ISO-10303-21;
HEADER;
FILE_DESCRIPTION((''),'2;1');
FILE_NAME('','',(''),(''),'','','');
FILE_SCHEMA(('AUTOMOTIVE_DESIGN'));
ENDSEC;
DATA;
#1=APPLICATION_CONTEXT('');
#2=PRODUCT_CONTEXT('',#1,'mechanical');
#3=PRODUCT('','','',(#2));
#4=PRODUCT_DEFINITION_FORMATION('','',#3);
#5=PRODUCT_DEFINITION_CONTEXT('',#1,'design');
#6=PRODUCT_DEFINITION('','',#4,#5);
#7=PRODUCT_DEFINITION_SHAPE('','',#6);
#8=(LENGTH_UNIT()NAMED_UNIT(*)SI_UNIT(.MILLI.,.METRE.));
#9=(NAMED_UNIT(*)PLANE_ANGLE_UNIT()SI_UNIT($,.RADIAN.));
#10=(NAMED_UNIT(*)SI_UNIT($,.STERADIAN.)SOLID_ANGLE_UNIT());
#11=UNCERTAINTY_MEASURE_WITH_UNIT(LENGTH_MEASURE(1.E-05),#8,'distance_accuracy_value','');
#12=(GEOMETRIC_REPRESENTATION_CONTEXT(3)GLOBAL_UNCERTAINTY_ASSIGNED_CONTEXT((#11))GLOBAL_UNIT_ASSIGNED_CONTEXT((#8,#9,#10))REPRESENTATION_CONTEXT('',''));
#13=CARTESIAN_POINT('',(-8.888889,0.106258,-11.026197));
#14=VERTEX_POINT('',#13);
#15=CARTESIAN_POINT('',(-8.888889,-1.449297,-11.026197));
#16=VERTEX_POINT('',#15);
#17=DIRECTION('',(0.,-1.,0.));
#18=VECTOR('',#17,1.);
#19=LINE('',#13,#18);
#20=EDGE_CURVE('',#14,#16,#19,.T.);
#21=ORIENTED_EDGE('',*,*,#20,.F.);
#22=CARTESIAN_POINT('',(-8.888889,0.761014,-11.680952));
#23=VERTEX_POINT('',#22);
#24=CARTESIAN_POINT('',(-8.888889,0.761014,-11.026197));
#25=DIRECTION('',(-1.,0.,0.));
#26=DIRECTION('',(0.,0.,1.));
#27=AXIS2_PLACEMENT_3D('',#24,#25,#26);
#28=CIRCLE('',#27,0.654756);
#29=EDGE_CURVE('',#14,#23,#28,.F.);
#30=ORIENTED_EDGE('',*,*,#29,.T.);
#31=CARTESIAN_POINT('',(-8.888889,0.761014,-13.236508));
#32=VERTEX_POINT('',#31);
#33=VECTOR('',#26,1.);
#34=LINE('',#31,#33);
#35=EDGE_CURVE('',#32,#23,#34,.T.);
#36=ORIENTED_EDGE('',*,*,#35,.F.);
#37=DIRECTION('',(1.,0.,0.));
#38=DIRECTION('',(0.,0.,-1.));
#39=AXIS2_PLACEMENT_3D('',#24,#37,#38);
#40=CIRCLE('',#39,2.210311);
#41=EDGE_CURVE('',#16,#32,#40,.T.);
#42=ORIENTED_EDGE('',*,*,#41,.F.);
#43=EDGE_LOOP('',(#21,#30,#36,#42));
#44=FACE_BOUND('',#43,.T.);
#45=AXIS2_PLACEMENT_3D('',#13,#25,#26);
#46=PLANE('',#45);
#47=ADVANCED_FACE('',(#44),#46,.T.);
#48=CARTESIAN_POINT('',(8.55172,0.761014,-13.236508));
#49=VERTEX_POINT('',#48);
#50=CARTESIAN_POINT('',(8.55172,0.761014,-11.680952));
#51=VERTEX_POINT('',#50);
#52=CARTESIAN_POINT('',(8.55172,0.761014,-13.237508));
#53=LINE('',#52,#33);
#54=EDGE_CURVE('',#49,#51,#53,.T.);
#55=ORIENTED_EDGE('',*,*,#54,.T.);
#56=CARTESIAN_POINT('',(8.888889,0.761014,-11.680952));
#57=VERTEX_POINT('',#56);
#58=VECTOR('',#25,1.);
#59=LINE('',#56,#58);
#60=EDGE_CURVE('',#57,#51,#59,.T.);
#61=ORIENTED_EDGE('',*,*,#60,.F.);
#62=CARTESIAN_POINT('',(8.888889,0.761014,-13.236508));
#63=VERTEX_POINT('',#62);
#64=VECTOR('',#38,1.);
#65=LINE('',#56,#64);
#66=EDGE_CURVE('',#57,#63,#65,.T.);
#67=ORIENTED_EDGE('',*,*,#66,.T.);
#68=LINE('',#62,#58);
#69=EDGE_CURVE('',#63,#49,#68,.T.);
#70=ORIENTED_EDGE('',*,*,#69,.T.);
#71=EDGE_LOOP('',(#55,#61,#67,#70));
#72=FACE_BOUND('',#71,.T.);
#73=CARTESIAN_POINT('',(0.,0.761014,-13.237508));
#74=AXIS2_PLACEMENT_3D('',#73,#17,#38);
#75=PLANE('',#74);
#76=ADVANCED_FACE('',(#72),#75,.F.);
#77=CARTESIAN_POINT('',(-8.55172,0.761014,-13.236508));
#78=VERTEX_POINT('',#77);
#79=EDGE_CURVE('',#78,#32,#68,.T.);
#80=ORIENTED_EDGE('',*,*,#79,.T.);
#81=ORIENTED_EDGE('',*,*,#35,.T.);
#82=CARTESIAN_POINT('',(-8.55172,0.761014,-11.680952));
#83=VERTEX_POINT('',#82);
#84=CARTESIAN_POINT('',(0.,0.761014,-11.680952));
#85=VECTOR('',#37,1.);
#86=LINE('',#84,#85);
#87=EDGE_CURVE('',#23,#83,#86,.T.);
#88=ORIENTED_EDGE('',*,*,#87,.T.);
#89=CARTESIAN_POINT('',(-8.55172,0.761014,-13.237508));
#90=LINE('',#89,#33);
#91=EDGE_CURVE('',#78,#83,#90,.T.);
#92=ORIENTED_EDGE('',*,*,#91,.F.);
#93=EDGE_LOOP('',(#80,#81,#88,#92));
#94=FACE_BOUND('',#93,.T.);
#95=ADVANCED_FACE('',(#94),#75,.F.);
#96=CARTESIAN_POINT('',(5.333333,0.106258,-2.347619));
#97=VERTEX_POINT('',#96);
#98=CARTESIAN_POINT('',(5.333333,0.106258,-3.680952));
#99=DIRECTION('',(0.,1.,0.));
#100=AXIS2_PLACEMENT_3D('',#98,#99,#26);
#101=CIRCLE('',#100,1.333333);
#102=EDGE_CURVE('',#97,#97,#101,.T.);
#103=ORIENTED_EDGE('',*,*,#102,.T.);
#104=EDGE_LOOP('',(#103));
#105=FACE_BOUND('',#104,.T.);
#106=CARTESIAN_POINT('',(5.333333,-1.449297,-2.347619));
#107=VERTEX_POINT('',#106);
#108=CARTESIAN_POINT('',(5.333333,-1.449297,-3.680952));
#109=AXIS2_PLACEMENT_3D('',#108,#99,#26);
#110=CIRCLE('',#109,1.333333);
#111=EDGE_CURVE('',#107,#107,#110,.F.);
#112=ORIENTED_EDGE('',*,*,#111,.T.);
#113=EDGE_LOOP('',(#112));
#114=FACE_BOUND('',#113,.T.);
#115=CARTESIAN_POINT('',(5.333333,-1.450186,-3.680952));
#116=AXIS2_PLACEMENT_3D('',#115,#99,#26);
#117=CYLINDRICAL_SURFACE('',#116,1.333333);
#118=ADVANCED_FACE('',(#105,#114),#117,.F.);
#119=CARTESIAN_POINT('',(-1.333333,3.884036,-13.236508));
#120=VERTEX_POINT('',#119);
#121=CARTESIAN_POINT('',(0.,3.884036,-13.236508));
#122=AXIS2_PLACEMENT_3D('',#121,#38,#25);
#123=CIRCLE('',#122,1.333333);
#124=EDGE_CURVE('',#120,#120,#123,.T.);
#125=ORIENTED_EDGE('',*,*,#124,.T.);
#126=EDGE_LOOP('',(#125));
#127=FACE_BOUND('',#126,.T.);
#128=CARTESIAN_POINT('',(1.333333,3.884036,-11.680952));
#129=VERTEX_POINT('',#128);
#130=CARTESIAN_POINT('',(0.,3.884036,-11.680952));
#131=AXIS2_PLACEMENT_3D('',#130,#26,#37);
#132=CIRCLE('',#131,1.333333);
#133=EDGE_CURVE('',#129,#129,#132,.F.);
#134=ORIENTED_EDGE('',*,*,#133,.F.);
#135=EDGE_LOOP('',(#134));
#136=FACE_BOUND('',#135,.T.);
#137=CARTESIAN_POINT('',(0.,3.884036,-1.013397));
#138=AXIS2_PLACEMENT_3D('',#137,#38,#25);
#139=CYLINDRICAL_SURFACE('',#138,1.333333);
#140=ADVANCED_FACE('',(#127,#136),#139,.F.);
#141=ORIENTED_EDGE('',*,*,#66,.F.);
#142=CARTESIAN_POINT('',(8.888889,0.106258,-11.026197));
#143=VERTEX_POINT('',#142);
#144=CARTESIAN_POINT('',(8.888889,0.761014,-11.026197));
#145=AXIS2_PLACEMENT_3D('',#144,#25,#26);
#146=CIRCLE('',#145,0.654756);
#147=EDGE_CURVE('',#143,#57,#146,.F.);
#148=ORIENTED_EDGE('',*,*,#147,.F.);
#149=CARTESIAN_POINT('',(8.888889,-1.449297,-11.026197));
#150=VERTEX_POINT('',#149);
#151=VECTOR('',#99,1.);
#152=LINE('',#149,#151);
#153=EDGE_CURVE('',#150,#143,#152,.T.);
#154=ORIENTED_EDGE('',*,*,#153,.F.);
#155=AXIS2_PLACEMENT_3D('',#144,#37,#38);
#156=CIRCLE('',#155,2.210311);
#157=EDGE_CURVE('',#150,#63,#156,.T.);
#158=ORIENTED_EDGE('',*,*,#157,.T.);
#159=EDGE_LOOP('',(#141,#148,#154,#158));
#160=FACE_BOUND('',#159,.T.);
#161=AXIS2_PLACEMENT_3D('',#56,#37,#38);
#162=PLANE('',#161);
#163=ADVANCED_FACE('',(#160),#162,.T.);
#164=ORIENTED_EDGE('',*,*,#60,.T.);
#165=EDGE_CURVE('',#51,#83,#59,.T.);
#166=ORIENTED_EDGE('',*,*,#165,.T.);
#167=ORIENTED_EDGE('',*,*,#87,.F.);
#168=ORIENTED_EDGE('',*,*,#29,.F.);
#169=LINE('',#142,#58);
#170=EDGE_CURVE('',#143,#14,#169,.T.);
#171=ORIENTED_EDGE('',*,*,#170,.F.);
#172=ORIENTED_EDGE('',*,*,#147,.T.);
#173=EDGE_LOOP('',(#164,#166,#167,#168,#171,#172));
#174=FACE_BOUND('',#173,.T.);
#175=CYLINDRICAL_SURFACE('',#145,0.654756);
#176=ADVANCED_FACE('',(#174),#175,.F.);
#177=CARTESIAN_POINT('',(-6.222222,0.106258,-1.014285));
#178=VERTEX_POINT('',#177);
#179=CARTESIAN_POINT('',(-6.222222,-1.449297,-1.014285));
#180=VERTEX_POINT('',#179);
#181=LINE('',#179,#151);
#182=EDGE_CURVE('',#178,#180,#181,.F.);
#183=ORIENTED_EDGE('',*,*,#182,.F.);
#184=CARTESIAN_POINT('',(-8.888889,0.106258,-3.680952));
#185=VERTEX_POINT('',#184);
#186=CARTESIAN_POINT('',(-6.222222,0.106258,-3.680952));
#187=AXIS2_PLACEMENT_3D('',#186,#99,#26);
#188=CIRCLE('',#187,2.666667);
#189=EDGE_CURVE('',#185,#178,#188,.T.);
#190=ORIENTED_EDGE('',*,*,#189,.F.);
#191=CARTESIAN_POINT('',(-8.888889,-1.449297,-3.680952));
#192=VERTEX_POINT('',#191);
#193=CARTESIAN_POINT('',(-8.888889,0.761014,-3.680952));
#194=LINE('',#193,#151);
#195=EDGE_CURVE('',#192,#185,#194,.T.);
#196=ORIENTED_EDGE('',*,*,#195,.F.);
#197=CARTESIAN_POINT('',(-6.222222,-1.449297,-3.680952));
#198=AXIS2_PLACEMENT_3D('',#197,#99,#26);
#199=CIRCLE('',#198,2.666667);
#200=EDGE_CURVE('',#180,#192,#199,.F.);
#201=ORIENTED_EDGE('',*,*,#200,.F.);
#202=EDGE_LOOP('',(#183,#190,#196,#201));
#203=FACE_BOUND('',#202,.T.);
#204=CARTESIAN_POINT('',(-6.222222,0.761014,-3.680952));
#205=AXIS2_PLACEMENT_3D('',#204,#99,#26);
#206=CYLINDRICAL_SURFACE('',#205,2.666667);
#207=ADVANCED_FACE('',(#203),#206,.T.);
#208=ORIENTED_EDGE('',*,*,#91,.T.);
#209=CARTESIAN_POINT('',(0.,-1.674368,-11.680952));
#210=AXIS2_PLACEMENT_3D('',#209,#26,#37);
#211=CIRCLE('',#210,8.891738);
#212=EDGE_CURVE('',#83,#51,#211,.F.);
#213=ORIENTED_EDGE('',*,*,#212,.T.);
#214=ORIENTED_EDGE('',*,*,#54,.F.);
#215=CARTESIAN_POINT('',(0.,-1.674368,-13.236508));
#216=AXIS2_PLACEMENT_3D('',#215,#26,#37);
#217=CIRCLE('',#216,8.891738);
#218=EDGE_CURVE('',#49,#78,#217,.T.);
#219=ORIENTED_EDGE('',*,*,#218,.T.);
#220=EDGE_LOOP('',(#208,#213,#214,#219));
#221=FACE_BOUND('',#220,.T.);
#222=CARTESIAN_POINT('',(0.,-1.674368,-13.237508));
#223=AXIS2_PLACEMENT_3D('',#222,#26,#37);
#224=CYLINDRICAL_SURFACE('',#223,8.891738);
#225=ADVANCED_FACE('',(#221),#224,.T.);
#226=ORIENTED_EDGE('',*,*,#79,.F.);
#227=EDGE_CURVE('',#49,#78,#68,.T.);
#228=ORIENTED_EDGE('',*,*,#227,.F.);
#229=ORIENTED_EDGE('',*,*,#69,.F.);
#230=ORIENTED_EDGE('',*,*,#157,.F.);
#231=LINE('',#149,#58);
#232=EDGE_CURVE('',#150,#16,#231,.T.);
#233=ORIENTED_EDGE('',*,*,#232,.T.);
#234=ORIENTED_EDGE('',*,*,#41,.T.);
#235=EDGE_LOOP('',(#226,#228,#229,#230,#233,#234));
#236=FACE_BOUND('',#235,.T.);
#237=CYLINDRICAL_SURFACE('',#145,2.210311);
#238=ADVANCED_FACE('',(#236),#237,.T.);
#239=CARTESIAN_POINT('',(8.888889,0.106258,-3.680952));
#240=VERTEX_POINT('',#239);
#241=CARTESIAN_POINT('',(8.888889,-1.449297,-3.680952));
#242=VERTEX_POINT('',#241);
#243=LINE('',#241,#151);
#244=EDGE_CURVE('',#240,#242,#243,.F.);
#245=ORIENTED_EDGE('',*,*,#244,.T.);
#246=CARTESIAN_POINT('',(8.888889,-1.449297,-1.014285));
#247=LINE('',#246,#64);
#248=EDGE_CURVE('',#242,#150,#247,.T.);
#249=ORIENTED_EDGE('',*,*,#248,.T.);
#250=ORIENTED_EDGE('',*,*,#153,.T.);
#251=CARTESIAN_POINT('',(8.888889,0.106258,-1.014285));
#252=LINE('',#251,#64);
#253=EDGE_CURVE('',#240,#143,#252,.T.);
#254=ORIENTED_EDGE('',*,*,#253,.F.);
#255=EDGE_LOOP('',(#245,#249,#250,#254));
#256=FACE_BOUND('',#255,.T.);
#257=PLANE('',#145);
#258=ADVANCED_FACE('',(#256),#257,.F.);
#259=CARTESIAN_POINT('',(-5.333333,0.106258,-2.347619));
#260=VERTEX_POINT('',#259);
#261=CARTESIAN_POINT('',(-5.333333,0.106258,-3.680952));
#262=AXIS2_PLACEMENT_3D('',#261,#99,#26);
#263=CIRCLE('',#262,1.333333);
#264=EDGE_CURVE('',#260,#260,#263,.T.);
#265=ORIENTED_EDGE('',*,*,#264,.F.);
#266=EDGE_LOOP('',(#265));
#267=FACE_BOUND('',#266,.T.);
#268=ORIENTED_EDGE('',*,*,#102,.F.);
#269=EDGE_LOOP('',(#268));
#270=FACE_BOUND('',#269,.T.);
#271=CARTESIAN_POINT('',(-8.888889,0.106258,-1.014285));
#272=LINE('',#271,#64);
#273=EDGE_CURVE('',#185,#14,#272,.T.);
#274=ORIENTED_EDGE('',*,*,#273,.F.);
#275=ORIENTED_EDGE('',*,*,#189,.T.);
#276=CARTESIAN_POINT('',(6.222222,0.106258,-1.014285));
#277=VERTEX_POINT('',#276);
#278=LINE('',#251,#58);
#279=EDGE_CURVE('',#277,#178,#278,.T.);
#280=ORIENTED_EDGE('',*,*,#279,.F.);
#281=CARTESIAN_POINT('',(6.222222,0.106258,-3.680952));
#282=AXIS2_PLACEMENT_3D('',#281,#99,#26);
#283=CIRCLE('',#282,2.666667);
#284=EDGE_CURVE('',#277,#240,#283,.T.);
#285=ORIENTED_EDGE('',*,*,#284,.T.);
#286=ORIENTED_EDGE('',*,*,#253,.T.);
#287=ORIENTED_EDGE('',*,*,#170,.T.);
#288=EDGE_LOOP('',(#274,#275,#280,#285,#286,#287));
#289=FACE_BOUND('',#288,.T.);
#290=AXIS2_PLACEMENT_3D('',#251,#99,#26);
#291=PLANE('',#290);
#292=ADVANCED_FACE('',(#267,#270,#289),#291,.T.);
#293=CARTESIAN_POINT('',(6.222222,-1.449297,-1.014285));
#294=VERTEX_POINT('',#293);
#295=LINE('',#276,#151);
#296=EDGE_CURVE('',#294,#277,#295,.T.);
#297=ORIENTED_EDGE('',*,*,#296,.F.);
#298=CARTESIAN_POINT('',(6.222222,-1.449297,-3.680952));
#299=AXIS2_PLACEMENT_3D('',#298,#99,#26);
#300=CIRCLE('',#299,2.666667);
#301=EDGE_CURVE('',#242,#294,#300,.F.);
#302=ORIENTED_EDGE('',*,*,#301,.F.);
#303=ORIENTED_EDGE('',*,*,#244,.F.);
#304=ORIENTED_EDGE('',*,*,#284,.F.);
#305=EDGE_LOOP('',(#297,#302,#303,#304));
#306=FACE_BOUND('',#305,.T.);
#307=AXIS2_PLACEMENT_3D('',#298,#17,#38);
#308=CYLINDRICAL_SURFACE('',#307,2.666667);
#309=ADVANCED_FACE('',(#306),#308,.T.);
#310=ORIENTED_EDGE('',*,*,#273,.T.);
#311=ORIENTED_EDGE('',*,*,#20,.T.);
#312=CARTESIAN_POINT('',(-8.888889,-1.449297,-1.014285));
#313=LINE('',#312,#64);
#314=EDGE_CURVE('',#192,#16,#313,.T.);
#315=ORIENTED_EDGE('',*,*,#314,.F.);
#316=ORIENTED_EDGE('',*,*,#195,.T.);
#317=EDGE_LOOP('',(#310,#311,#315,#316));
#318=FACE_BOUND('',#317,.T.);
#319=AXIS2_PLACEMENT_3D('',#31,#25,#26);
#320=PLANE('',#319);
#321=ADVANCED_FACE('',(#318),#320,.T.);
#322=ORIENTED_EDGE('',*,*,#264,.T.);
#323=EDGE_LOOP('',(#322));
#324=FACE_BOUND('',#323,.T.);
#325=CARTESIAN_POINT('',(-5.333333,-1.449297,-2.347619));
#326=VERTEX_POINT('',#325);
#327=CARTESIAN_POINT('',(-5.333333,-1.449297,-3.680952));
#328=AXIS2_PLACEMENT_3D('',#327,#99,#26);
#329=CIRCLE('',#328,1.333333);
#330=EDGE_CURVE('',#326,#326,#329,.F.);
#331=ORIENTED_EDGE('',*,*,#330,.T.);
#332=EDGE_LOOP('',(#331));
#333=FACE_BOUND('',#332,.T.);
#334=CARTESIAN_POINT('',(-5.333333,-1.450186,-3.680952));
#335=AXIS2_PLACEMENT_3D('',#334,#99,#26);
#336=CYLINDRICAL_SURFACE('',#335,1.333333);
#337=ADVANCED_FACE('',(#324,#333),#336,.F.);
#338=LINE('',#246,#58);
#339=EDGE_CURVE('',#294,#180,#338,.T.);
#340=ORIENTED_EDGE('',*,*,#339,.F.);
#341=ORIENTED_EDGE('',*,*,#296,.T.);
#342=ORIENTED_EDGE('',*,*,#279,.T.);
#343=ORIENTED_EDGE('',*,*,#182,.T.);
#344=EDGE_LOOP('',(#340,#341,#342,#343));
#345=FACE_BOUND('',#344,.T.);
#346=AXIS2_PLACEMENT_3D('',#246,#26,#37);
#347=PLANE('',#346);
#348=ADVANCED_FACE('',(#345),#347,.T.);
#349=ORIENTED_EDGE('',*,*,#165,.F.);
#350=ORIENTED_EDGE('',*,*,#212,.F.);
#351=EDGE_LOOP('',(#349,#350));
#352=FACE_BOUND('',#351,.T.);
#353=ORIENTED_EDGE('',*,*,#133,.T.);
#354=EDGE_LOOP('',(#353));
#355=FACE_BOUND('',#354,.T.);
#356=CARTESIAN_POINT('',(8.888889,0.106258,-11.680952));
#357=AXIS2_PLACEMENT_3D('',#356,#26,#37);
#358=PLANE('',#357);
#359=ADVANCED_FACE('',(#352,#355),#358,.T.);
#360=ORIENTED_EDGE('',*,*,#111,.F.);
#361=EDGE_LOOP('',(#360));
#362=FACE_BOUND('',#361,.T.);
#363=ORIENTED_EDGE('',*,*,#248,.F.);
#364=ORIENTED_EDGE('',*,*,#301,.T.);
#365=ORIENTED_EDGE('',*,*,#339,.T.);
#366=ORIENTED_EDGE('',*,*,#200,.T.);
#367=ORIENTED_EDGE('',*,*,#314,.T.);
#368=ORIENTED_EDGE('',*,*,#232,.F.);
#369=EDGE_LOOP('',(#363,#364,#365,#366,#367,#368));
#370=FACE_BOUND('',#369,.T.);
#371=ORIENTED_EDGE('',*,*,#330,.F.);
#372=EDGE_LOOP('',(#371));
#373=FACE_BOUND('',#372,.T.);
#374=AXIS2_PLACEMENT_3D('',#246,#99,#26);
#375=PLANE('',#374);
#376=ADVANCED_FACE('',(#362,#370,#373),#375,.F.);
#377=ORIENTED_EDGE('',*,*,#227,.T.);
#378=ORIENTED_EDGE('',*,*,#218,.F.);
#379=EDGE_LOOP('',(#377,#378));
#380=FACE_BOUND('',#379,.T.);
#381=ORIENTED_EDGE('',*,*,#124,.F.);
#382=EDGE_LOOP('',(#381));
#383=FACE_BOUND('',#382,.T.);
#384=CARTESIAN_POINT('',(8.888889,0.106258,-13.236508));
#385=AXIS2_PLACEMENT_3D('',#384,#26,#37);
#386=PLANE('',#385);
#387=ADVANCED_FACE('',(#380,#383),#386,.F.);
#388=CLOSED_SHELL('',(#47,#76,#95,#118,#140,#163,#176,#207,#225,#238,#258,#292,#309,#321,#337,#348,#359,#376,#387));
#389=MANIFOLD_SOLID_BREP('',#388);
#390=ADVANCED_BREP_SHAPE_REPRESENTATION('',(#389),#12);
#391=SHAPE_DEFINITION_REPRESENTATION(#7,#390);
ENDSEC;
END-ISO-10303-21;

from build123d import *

# Parameters (mm, degrees)
BASE_FLANGE1_DEPTH        = 10
FILLET1_R                 = 3
CORTAR_EXTRUIR1_START     = -1.75
CORTAR_EXTRUIR1_OUTLINE_R = 1.5
CORTAR_EXTRUIR1_DEPTH     = 1.75
CORTAR_EXTRUIR2_REACH     = 20.79
CROQUIS2_R                = 1.5
SCALE1_SCALE              = 0.888888889
CUT_EXTRUDE2_REACH        = 17.649


# Read off the part's stored shape, not the designer's step: Cortar-Extruir1
# Sheet-metal steps are written as plain solids
with BuildPart() as part:
    # Sketch1 → Base-Flange1 (new, symmetric)
    with BuildSketch(Plane(origin=(0, 0, 0), x_dir=(0, 0, -1), z_dir=(1, 0, 0))):
        with BuildLine():
            Line((0, 0), (11.2634, 0))
            ThreePointArc((11.2634, 0), (11.784254855, 0.215745145), (12, 0.7366))
            Line((12, 0.7366), (12, 8))
            Line((12, 8), (13.75, 8))
            Line((13.75, 8), (13.75, 0.7366))
            ThreePointArc((13.75, 0.7366), (13.021691722, -1.021691722), (11.2634, -1.75))
            Line((11.2634, -1.75), (0, -1.75))
            Line((0, -1.75), (0, 0))
        make_face()
    extrude(amount=BASE_FLANGE1_DEPTH, both=True)

    # Fillet1
    fillet1_edges = [part.edges().sort_by_distance(p)[0] for p in [
        (10, -0.875, 0),
        (10, 8, -12.875),
        (-10, -0.875, 0),
        (-10, 8, -12.875),
    ]]
    fillet(fillet1_edges, radius=FILLET1_R)

    # Cortar-Extruir1 outline → Cortar-Extruir1 (cut)
    with BuildSketch(Plane(origin=(0, 0, 0), x_dir=(1, 0, 0), z_dir=(0, 1, 0)).offset(CORTAR_EXTRUIR1_START)):
        with Locations((-6, 3)):
            Circle(CORTAR_EXTRUIR1_OUTLINE_R)
        with Locations((6, 3)):
            Circle(CORTAR_EXTRUIR1_OUTLINE_R)
    extrude(amount=CORTAR_EXTRUIR1_DEPTH, mode=Mode.SUBTRACT)

    # Croquis2 → Cortar-Extruir2 (cut, up to next)
    with BuildSketch(Plane(origin=(0, 0, -13.75), x_dir=(-1, 0, 0), z_dir=(0, 0, -1)), mode=Mode.PRIVATE) as cortar_extruir2_sk1:
        with Locations((0, 4.25)):
            Circle(CROQUIS2_R)
    cortar_extruir2_tool1 = extrude(cortar_extruir2_sk1.sketch, amount=-CORTAR_EXTRUIR2_REACH, mode=Mode.PRIVATE) & part.part
    add(cortar_extruir2_tool1.solids().sort_by_distance((0, 4.25, -13.75))[0], mode=Mode.SUBTRACT)


with BuildPart() as part_1:
    # Scale1: scaled about (0, 0.956325362, -9.128568618)
    add(part.part.scale(SCALE1_SCALE).moved(Location((0, 0.106258374, -1.014285402))))

    # Sketch2 → Cut-Extrude2 (cut, up to next)
    with BuildSketch(Plane.XY.offset(-11.680952069), mode=Mode.PRIVATE) as cut_extrude2_sk1:
        with BuildLine():
            Line((-8.888888889, 4.550702818), (-8.888888889, 0.761013929))
            Line((-8.888888889, 0.761013929), (-8.551720038, 0.761013929))
            ThreePointArc((-8.551720038, 0.761013929), (-5.357621736, 5.42203153), (0, 7.217369485))
            Line((0, 7.217369485), (-6.222222222, 7.217369485))
            ThreePointArc((-6.222222222, 7.217369485), (-8.107840305, 6.436320901), (-8.888888889, 4.550702818))
        make_face()
    cut_extrude2_tool1 = extrude(cut_extrude2_sk1.sketch, amount=-CUT_EXTRUDE2_REACH, mode=Mode.PRIVATE) & part_1.part
    # Sketch2 → Cut-Extrude2 (cut, up to next)
    with BuildSketch(Plane.XY.offset(-11.680952069), mode=Mode.PRIVATE) as cut_extrude2_sk2:
        with BuildLine():
            Line((6.222222222, 7.217369485), (0, 7.217369485))
            ThreePointArc((0, 7.217369485), (5.357621736, 5.42203153), (8.551720038, 0.761013929))
            Line((8.551720038, 0.761013929), (8.888888889, 0.761013929))
            Line((8.888888889, 0.761013929), (8.888888889, 4.550702818))
            ThreePointArc((8.888888889, 4.550702818), (8.107840305, 6.436320901), (6.222222222, 7.217369485))
        make_face()
    cut_extrude2_tool2 = extrude(cut_extrude2_sk2.sketch, amount=-CUT_EXTRUDE2_REACH, mode=Mode.PRIVATE) & part_1.part
    add(cut_extrude2_tool1.solids().sort_by_distance((-6.729341, 5.184457, -11.680952))[0], mode=Mode.SUBTRACT)
    add(cut_extrude2_tool2.solids().sort_by_distance((6.729341, 5.184457, -11.680952))[0], mode=Mode.SUBTRACT)


solid = part_1.part
